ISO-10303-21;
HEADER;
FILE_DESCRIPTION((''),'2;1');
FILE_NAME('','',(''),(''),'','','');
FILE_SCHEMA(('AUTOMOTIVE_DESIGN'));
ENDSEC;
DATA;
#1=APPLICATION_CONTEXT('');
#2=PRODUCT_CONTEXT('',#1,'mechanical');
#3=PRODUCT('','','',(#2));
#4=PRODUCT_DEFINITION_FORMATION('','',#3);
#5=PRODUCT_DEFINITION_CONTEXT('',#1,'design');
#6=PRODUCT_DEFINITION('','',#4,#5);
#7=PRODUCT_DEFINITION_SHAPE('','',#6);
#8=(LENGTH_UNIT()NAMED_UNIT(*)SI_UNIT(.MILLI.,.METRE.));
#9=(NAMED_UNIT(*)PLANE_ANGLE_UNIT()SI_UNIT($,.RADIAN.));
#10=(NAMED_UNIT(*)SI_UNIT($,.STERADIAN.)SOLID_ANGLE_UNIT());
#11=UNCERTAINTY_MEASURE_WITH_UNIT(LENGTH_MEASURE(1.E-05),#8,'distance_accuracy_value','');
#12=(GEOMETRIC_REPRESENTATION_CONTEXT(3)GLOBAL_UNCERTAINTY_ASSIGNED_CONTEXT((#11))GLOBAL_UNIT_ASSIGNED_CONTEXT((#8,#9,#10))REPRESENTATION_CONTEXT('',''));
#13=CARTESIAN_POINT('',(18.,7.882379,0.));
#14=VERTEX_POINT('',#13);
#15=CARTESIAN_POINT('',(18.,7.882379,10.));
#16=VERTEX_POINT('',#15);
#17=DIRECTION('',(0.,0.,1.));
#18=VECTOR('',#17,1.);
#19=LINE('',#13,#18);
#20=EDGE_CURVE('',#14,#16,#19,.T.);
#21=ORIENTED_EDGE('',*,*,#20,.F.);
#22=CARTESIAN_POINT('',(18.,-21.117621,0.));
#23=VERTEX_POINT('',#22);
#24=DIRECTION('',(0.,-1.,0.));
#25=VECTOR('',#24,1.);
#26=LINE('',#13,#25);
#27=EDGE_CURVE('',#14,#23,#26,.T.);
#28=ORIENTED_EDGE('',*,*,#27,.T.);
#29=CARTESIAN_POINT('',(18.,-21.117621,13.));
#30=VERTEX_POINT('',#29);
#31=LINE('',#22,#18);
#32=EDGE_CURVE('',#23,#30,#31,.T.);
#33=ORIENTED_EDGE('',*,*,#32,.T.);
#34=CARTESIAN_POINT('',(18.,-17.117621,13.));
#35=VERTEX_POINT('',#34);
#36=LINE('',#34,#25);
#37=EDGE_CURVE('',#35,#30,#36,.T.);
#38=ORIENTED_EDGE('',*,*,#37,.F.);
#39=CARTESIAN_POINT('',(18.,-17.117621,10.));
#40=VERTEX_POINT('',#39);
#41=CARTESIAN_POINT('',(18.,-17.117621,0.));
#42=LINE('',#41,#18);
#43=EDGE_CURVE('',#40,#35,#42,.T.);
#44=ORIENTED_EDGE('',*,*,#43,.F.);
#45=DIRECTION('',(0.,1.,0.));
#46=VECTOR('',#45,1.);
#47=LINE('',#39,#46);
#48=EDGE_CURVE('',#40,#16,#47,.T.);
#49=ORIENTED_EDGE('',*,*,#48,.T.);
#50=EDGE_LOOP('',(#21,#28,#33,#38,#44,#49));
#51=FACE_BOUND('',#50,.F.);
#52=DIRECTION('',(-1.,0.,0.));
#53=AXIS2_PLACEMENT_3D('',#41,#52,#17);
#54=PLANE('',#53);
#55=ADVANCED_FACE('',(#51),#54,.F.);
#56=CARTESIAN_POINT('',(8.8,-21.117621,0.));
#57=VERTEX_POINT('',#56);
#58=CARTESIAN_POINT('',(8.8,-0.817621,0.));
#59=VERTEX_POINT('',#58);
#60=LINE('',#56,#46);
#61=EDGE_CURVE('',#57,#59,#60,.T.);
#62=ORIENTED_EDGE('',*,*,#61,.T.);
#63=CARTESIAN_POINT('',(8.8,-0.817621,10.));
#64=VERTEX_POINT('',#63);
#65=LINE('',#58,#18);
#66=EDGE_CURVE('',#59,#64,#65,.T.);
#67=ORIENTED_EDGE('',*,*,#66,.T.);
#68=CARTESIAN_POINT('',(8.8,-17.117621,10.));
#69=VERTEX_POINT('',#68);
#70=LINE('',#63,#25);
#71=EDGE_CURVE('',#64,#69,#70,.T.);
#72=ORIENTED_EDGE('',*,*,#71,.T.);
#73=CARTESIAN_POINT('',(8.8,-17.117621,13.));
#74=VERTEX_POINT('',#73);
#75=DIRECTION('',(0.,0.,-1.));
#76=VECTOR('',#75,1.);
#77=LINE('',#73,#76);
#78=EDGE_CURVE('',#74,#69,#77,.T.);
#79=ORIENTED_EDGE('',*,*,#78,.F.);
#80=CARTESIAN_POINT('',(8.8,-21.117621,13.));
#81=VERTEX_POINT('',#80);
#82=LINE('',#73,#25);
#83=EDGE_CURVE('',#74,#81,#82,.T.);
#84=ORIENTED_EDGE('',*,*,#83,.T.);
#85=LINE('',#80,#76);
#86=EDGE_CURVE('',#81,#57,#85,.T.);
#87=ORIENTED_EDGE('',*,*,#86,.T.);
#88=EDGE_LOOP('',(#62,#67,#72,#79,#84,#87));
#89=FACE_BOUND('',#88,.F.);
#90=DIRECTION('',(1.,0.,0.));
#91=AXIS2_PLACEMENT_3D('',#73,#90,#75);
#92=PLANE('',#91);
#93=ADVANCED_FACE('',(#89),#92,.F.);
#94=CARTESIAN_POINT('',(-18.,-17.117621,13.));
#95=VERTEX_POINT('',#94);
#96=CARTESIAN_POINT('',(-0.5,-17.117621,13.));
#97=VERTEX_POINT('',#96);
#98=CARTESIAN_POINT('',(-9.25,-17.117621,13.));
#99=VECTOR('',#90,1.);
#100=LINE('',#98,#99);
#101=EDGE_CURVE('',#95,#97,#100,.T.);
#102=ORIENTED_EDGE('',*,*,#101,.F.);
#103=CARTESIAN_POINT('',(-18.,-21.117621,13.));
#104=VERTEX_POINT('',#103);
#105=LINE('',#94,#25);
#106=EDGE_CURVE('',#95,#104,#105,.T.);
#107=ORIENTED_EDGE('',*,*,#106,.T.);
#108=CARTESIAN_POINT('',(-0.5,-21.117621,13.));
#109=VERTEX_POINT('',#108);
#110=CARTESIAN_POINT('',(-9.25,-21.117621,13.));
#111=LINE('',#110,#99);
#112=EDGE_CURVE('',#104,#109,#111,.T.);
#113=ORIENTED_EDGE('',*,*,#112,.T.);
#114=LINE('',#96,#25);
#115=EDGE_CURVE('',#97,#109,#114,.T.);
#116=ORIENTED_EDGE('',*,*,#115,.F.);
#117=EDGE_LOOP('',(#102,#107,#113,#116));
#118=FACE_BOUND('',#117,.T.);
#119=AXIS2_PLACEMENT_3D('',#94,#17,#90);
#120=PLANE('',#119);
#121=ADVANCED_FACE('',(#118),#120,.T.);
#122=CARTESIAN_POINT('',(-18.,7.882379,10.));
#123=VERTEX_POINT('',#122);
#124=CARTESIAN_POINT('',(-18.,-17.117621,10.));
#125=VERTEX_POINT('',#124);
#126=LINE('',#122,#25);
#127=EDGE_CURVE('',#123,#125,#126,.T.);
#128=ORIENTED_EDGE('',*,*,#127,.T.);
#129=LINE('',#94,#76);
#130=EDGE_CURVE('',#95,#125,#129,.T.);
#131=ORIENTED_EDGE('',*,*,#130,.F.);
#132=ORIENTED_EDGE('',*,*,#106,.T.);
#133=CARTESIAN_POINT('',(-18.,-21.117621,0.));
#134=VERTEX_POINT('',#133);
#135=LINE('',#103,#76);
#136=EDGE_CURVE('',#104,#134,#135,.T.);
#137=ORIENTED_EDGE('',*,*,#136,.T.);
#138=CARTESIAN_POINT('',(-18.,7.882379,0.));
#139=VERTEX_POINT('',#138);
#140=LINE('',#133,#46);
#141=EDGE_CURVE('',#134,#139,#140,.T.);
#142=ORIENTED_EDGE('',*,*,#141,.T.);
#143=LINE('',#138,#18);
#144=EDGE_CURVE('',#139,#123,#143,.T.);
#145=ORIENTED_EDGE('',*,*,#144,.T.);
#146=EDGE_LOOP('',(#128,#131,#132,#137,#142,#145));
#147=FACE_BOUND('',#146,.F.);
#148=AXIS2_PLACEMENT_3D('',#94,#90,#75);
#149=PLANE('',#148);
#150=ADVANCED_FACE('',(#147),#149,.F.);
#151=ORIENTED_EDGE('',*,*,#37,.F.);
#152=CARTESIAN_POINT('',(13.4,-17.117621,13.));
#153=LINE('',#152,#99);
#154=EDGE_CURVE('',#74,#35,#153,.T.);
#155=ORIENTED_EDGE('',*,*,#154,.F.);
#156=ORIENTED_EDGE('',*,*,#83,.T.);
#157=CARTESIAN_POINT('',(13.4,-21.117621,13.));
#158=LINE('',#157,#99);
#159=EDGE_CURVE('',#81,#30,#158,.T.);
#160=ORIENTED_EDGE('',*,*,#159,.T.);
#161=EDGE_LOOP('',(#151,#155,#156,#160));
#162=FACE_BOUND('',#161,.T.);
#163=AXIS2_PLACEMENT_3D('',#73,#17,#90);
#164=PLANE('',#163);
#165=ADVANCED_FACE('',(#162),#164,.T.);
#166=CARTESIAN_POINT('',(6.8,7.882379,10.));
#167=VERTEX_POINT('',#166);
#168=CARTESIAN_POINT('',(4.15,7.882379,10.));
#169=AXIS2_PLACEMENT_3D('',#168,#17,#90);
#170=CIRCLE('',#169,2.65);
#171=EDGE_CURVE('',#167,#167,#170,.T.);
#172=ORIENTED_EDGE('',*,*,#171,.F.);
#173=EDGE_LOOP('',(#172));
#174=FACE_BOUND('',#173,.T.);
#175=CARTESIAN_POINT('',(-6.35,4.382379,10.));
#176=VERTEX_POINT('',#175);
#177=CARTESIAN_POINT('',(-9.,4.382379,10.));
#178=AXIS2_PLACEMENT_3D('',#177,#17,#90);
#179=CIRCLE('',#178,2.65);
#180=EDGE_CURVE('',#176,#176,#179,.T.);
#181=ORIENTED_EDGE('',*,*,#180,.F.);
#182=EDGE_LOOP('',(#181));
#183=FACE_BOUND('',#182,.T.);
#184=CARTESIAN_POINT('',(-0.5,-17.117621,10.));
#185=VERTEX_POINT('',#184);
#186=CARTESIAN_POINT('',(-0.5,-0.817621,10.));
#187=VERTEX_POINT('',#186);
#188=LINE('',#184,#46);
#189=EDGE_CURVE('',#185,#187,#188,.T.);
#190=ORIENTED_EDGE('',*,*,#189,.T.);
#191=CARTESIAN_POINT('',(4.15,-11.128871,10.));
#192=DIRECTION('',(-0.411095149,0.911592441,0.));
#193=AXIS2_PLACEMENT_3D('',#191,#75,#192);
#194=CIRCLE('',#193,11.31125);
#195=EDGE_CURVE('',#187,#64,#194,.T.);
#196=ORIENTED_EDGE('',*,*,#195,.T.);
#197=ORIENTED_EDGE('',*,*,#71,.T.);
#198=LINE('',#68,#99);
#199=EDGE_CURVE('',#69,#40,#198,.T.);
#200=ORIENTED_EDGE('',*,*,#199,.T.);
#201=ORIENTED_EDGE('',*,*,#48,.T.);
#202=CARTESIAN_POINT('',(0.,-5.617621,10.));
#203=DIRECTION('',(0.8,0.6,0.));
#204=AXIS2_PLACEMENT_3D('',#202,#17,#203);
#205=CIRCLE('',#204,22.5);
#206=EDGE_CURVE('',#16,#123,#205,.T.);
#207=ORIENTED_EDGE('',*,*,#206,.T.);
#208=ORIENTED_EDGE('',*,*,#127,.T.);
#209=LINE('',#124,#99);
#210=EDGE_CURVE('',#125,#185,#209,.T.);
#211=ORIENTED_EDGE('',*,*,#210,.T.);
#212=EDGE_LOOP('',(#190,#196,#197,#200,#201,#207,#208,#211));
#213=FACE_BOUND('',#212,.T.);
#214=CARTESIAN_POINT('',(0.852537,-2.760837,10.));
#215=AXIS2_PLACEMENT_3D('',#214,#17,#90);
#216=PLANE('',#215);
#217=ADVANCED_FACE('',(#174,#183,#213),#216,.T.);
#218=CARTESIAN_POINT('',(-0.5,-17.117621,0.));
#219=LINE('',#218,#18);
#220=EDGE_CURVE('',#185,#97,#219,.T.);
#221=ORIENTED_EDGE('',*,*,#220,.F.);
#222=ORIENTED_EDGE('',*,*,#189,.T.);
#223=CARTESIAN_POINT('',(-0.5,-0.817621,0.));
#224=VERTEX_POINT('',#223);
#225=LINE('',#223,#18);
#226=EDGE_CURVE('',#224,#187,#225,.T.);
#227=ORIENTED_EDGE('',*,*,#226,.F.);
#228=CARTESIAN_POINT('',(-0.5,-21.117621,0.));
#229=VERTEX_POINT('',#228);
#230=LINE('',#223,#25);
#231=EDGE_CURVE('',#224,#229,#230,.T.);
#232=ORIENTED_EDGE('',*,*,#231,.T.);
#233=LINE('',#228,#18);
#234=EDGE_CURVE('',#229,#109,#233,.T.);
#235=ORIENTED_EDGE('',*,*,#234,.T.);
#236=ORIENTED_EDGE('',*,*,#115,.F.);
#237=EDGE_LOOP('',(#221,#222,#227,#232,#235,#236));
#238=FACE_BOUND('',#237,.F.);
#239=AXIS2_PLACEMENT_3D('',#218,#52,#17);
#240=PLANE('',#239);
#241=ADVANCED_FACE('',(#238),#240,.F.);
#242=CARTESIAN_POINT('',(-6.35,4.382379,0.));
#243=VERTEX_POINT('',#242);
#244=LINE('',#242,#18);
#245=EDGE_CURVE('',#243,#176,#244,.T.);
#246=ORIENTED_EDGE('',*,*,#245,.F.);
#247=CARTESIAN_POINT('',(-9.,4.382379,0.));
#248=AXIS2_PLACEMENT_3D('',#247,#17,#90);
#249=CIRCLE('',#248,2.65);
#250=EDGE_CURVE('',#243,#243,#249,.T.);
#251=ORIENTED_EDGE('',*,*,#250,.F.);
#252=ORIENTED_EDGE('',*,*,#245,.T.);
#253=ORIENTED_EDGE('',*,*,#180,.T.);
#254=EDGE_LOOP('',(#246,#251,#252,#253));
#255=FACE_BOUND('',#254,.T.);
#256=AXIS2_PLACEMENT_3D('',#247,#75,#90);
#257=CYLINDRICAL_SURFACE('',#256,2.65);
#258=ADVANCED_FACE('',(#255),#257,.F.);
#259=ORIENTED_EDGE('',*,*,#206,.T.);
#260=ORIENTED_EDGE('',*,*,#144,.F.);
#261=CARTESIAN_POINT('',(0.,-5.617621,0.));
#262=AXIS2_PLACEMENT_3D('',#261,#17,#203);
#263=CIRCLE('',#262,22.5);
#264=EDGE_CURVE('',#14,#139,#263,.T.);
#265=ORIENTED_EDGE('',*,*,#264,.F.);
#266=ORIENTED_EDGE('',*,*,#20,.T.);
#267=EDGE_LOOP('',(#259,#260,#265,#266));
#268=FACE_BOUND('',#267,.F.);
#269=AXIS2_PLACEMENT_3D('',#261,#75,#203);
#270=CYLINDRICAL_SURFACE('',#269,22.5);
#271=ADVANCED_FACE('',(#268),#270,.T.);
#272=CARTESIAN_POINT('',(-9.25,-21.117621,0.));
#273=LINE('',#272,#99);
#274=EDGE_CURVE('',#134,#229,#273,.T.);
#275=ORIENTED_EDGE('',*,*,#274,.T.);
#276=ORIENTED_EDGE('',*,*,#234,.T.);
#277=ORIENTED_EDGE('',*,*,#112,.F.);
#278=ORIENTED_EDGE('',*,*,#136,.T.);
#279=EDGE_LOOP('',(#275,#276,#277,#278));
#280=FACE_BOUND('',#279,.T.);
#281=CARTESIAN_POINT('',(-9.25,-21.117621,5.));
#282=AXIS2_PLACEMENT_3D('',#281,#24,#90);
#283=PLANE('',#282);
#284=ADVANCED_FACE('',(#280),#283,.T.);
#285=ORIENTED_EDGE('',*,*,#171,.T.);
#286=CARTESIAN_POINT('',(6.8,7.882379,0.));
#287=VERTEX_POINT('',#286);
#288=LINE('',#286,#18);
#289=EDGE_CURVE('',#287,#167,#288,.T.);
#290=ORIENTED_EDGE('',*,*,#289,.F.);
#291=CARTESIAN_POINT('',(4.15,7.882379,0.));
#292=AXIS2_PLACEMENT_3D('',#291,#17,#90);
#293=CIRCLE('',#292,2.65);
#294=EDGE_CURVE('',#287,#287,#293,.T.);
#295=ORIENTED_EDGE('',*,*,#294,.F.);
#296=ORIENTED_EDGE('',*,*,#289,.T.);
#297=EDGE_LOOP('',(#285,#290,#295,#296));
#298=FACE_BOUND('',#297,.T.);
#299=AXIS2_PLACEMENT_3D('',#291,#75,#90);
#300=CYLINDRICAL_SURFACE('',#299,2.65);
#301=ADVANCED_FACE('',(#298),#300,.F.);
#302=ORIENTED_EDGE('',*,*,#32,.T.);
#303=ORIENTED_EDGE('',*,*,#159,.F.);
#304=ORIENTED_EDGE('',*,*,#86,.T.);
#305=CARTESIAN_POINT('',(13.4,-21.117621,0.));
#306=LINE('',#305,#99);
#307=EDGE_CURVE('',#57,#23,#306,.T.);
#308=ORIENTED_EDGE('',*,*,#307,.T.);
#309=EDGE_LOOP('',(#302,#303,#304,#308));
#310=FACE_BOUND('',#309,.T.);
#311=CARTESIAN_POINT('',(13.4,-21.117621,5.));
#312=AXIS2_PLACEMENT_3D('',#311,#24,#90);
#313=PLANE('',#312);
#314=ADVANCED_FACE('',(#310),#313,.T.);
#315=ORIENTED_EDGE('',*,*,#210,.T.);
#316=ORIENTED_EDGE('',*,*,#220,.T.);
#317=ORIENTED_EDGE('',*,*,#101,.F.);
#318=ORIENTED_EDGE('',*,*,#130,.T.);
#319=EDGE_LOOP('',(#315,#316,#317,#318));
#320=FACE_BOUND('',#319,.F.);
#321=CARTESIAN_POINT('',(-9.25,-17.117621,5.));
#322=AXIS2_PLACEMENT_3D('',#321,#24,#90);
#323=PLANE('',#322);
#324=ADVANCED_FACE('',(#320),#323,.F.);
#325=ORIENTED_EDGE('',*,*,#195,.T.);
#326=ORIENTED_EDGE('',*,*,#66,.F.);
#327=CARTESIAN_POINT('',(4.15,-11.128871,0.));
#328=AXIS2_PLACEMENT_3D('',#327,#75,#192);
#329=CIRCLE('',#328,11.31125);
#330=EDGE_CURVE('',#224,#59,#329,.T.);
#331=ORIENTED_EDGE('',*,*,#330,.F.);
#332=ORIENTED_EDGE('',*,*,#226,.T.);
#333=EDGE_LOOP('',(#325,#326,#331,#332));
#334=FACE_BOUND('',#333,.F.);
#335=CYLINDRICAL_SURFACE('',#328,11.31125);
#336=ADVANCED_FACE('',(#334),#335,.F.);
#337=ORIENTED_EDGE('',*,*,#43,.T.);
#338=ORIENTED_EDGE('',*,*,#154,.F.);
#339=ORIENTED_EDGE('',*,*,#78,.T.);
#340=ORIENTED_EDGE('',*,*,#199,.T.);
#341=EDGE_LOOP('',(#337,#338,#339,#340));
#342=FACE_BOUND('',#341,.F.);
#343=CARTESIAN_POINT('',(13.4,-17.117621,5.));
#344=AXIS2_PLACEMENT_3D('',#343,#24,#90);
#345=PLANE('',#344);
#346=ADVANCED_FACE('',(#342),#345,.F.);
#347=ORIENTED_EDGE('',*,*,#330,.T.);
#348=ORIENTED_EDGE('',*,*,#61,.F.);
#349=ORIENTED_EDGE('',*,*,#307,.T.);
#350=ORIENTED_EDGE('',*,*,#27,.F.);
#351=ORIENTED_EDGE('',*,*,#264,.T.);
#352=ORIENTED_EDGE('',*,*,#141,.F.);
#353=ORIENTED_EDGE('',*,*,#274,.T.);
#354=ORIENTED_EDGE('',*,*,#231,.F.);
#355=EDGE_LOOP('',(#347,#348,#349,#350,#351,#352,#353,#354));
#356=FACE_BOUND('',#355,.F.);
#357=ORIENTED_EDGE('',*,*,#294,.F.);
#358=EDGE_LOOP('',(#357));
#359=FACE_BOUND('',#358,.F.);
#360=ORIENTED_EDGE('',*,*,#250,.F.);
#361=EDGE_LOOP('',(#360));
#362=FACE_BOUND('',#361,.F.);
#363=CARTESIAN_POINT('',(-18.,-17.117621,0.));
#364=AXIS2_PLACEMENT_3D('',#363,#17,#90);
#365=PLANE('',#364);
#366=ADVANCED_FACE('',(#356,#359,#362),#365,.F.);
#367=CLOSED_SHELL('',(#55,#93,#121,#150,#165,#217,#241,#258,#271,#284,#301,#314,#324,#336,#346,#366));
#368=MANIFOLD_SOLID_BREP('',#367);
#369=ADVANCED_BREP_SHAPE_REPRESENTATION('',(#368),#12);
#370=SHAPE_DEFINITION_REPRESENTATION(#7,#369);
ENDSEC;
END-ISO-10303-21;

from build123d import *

# Parameters (mm, degrees)
F0_R     = 2.65
F1_DEPTH = 10
F2_W     = 9.2
F2_H     = 10
F2_H_2   = 3
F3_DEPTH = 4
F4_W     = 17.5
F4_H     = 10
F4_H_2   = 3
F5_DEPTH = 4


with BuildPart() as f1:
    # F0 (on Top) → F1 (new body)
    with BuildSketch(Plane.XY):
        with BuildLine():
            Line((-18, 7.8823786229), (-18, -17.1176213771))
            Line((-18, -17.1176213771), (-0.5, -17.1176213771))
            Line((-0.5, -17.1176213771), (-0.5, -0.8176213771))
            ThreePointArc((-0.5, -0.8176213771), (4.15, 0.1823786229), (8.8, -0.8176213771))
            Line((8.8, -0.8176213771), (8.8, -17.1176213771))
            Line((8.8, -17.1176213771), (18, -17.1176213771))
            Line((18, -17.1176213771), (18, 7.8823786229))
            ThreePointArc((18, 7.8823786229), (0, 16.8823786229), (-18, 7.8823786229))
        make_face()
        with Locations((-9, 4.3823786229)):
            Circle(F0_R, mode=Mode.SUBTRACT)
        with Locations((4.15, 7.8823786229)):
            Circle(F0_R, mode=Mode.SUBTRACT)
    extrude(amount=F1_DEPTH)

    # F2 (on face) → F3 (join)
    with BuildSketch(Plane.XZ.offset(17.1176213771)):
        with Locations((13.4, 5)):
            Rectangle(F2_W, F2_H)
        with Locations((13.4, 11.5)):
            Rectangle(F2_W, F2_H_2)
    extrude(amount=F3_DEPTH)

    # F4 (on face) → F5 (join, through all)
    with BuildSketch(Plane.XZ.offset(17.1176213771)):
        with Locations((-9.25, 5)):
            Rectangle(F4_W, F4_H)
        with Locations((-9.25, 11.5)):
            Rectangle(F4_W, F4_H_2)
    extrude(amount=F5_DEPTH)


solid = f1.part
